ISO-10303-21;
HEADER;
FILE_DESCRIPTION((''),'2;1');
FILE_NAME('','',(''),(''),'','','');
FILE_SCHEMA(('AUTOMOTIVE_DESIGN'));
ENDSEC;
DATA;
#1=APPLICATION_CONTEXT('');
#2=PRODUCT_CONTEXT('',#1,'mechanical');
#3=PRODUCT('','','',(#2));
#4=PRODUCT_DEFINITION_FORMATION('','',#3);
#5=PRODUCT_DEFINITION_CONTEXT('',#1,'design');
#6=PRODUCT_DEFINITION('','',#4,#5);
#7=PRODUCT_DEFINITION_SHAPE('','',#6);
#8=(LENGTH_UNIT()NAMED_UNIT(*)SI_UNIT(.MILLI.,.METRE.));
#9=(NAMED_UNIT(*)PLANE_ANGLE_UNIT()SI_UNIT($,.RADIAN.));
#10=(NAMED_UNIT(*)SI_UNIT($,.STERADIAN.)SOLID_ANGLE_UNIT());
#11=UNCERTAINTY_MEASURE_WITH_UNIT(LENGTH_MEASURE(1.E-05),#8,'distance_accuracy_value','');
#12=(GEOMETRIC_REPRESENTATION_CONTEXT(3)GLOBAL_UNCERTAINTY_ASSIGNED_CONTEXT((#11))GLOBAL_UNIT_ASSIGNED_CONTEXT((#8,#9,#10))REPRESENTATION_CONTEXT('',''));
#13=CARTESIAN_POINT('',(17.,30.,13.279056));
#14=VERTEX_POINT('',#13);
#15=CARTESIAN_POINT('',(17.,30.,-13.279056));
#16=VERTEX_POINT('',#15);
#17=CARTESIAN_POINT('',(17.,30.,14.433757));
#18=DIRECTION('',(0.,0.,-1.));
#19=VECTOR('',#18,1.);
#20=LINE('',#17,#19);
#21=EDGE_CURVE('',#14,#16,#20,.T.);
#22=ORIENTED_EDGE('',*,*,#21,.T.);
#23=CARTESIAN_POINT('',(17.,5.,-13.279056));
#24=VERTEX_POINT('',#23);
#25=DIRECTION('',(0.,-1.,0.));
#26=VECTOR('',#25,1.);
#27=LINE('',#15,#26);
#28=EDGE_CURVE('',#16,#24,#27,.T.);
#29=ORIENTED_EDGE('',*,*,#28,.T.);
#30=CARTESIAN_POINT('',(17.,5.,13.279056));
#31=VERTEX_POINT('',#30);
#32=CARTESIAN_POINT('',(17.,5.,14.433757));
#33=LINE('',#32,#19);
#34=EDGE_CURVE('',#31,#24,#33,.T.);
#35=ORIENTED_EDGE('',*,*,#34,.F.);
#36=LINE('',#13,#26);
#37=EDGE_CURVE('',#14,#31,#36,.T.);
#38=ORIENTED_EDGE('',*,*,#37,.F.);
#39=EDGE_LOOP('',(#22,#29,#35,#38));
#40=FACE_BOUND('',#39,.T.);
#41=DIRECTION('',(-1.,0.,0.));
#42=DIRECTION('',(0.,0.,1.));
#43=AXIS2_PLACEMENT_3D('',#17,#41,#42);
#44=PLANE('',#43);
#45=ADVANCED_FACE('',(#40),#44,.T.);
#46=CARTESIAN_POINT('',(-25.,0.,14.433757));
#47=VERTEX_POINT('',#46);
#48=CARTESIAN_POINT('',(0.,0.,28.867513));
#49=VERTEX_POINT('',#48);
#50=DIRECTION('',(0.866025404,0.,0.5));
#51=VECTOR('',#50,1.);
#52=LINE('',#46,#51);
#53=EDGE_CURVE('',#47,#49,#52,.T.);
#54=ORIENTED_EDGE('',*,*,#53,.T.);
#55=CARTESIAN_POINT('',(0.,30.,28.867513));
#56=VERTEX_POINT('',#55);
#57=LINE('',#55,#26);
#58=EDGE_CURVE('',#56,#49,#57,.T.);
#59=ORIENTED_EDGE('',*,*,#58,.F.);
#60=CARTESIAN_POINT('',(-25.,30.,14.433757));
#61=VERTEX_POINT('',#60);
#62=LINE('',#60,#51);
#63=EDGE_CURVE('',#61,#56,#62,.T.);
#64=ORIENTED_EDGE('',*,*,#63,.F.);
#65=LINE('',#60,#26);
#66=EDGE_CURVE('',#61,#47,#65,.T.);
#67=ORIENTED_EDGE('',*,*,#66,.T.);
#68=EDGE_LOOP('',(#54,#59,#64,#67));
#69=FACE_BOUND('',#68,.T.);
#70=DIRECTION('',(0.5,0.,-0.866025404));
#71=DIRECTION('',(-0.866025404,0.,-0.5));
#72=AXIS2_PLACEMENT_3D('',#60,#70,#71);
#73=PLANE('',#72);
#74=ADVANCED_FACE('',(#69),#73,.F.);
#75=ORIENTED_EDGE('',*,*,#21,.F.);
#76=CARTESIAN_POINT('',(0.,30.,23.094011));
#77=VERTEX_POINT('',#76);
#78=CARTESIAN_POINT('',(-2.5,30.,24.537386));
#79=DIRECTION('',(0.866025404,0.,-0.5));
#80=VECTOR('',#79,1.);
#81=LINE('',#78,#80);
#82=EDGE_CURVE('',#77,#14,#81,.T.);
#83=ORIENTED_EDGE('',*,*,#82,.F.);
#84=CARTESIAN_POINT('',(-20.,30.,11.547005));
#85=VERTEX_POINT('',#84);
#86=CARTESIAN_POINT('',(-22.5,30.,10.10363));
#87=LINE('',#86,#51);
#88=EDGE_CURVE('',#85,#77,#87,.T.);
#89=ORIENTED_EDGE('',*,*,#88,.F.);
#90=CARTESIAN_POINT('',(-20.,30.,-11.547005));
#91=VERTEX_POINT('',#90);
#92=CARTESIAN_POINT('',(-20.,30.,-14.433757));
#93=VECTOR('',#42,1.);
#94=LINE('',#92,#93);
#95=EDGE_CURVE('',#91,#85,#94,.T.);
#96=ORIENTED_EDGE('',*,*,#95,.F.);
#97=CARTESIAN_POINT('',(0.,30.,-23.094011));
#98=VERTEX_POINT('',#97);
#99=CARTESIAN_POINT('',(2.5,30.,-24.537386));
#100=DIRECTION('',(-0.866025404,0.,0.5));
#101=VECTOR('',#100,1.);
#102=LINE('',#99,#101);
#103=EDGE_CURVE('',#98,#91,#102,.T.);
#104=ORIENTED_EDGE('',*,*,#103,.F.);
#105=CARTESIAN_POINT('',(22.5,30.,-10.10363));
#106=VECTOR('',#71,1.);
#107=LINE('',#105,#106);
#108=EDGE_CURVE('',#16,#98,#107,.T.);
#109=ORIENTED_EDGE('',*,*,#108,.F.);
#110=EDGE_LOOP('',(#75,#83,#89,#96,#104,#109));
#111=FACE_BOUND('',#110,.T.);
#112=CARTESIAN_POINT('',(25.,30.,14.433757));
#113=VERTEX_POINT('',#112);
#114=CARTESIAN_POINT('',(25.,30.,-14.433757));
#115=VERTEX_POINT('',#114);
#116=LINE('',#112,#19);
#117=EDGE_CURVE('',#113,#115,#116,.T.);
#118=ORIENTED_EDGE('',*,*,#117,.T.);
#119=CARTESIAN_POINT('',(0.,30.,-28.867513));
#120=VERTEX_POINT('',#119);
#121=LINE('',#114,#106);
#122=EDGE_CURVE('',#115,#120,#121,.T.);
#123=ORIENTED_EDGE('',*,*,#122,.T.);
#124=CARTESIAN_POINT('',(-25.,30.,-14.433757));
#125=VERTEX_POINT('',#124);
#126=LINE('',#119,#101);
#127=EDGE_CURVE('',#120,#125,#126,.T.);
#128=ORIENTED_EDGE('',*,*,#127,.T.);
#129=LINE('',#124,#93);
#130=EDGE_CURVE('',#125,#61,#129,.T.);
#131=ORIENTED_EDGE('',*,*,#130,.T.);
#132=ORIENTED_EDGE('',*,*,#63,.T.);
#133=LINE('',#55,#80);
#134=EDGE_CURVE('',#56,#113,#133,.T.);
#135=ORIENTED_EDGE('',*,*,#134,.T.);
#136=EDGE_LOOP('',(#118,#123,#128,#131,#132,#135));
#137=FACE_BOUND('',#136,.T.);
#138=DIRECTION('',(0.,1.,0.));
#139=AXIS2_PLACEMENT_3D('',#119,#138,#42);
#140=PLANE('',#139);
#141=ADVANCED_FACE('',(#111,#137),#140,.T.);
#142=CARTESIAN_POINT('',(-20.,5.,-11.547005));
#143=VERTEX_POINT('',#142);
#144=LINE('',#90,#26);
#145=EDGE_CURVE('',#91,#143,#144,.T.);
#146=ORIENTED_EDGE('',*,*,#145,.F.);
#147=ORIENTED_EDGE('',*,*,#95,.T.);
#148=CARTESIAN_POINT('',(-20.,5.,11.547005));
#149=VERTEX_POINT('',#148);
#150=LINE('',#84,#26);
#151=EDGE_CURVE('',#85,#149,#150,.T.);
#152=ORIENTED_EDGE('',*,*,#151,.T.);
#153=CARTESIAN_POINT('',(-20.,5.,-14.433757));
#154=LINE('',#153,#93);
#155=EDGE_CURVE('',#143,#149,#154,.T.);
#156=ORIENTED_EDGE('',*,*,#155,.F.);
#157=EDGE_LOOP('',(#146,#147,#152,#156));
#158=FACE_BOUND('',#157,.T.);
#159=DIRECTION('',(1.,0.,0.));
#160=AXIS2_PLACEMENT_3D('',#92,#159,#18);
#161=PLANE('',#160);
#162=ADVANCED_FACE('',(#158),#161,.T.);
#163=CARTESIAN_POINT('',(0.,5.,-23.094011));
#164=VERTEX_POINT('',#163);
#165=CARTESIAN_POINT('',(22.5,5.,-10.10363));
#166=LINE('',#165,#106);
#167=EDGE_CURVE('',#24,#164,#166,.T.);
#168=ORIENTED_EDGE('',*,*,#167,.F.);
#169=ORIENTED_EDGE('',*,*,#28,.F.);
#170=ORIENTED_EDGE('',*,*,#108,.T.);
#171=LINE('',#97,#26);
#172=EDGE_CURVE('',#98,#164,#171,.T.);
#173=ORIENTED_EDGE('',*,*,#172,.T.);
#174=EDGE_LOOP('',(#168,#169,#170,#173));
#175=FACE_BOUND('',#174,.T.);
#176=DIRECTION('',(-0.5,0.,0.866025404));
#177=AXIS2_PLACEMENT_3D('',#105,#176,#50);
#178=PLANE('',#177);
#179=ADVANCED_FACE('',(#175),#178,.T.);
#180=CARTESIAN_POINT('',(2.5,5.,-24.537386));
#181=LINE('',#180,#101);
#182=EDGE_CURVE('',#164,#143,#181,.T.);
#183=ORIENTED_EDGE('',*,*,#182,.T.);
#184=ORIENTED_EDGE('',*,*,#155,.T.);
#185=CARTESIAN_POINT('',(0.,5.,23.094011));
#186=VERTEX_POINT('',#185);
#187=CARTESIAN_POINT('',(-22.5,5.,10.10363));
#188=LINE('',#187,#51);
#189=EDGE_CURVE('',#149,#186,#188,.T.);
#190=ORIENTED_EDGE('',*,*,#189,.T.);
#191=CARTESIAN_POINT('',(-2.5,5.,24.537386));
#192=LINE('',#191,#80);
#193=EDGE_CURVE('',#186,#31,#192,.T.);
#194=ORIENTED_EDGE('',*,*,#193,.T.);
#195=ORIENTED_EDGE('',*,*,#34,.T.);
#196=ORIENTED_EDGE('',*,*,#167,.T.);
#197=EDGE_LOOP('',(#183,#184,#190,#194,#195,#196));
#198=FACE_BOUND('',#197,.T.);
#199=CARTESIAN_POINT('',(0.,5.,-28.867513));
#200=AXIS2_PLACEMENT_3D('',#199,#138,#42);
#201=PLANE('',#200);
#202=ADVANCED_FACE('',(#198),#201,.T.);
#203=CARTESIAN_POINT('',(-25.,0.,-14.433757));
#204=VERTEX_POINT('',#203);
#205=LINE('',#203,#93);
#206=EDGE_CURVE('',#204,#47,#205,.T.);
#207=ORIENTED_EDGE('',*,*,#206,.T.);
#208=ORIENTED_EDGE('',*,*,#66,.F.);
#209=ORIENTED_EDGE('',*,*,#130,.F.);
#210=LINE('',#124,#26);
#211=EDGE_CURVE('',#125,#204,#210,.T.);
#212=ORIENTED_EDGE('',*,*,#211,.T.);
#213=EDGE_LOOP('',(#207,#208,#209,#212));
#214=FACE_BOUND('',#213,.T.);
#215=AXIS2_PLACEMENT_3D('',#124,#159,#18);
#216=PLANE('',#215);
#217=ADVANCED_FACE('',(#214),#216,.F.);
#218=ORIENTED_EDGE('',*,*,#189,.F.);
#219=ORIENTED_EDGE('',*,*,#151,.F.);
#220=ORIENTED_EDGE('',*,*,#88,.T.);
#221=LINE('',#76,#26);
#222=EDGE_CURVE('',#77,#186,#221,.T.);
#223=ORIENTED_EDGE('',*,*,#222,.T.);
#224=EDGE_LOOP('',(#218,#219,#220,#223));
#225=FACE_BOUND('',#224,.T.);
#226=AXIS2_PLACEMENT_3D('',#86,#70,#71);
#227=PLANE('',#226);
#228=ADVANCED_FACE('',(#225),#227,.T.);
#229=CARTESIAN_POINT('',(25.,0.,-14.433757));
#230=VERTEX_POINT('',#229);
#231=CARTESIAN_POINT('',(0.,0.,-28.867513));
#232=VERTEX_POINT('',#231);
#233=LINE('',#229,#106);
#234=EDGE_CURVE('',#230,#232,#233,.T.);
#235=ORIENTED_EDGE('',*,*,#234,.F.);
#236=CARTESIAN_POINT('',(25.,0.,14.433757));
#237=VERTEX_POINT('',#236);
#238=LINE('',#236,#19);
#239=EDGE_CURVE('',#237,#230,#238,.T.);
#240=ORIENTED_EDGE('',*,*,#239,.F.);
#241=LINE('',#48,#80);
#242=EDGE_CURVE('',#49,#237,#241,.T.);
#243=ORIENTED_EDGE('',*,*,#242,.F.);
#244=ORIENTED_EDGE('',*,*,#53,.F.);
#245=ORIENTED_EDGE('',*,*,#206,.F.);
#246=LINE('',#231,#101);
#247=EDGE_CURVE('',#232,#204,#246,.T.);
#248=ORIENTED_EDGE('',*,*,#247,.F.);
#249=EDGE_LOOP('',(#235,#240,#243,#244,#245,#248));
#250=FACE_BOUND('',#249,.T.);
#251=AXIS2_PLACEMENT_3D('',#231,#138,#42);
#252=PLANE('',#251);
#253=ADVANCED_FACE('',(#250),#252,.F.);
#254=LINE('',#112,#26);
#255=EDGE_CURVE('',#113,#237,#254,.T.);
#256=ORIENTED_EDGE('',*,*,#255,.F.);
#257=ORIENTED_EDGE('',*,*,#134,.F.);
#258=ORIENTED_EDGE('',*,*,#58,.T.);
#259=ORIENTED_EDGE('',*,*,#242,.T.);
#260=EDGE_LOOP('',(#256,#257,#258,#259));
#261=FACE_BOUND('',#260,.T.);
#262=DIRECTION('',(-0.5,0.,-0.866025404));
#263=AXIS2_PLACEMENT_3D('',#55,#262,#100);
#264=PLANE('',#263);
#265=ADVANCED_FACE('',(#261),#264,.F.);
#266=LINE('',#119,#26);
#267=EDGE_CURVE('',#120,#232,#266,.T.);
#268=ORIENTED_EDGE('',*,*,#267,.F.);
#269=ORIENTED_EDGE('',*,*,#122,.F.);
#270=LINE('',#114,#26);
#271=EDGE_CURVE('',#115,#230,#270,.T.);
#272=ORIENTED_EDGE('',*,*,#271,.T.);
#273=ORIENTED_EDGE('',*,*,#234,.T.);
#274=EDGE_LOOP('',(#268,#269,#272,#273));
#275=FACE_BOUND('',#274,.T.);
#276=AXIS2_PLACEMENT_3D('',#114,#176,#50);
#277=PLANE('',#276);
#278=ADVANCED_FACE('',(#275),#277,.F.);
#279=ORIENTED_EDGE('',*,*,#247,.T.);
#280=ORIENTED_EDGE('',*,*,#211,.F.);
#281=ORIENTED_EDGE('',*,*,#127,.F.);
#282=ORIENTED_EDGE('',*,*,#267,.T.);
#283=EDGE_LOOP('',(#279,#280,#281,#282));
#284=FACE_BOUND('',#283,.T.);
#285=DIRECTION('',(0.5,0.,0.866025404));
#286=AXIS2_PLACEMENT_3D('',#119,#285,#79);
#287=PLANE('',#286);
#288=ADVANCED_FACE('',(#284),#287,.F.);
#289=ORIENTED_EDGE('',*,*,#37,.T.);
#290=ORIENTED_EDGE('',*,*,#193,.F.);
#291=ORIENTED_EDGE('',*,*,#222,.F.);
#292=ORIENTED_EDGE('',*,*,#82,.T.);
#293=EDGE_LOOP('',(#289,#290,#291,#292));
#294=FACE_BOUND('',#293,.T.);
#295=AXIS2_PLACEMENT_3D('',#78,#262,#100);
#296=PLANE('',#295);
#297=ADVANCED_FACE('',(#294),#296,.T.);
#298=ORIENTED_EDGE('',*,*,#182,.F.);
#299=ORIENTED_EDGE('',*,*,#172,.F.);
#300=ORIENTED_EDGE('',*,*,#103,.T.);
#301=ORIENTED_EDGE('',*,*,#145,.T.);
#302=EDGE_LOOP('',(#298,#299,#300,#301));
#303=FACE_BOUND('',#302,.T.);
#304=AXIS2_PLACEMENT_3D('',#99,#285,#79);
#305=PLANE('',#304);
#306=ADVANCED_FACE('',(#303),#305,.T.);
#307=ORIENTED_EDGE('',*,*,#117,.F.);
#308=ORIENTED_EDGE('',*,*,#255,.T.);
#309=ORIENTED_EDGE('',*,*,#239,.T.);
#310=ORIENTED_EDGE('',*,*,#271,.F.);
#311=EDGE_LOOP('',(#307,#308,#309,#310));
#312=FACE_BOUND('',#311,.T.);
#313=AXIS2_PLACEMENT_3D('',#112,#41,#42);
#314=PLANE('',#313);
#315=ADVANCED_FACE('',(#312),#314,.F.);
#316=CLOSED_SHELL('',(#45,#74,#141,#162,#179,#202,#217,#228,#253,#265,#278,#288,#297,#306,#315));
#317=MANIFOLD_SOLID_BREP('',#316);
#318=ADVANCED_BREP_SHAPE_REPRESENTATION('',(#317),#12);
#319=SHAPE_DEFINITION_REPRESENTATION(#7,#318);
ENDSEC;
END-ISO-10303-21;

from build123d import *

# Parameters (mm, degrees)
EXTRUDE_1_DEPTH = 30
SHELL_START     = 5
SHELL_1_DEPTH   = 25


# Read off the part's stored shape, not the designer's step: 薄殼1
with BuildPart() as part:
    # 草圖1 → 伸長1 (new body)
    with BuildSketch(Plane(origin=(0, 0, 0), x_dir=(1, 0, 0), z_dir=(0, 1, 0))):
        Polygon((0, 28.867513459), (-25, 14.43375673), (-25, -14.43375673), (0, -28.867513459), (25, -14.43375673), (25, 14.43375673), align=None)
    extrude(amount=EXTRUDE_1_DEPTH)

    # 薄殼1 outline → 薄殼1 (cut)
    with BuildSketch(Plane(origin=(0, 0, 0), x_dir=(1, 0, 0), z_dir=(0, 1, 0)).offset(SHELL_START)):
        Polygon((17, 13.279056191), (0, 23.094010768), (-20, 11.547005384), (-20, -11.547005384), (0, -23.094010768), (17, -13.279056191), align=None)
    extrude(amount=SHELL_1_DEPTH, mode=Mode.SUBTRACT)


solid = part.part
